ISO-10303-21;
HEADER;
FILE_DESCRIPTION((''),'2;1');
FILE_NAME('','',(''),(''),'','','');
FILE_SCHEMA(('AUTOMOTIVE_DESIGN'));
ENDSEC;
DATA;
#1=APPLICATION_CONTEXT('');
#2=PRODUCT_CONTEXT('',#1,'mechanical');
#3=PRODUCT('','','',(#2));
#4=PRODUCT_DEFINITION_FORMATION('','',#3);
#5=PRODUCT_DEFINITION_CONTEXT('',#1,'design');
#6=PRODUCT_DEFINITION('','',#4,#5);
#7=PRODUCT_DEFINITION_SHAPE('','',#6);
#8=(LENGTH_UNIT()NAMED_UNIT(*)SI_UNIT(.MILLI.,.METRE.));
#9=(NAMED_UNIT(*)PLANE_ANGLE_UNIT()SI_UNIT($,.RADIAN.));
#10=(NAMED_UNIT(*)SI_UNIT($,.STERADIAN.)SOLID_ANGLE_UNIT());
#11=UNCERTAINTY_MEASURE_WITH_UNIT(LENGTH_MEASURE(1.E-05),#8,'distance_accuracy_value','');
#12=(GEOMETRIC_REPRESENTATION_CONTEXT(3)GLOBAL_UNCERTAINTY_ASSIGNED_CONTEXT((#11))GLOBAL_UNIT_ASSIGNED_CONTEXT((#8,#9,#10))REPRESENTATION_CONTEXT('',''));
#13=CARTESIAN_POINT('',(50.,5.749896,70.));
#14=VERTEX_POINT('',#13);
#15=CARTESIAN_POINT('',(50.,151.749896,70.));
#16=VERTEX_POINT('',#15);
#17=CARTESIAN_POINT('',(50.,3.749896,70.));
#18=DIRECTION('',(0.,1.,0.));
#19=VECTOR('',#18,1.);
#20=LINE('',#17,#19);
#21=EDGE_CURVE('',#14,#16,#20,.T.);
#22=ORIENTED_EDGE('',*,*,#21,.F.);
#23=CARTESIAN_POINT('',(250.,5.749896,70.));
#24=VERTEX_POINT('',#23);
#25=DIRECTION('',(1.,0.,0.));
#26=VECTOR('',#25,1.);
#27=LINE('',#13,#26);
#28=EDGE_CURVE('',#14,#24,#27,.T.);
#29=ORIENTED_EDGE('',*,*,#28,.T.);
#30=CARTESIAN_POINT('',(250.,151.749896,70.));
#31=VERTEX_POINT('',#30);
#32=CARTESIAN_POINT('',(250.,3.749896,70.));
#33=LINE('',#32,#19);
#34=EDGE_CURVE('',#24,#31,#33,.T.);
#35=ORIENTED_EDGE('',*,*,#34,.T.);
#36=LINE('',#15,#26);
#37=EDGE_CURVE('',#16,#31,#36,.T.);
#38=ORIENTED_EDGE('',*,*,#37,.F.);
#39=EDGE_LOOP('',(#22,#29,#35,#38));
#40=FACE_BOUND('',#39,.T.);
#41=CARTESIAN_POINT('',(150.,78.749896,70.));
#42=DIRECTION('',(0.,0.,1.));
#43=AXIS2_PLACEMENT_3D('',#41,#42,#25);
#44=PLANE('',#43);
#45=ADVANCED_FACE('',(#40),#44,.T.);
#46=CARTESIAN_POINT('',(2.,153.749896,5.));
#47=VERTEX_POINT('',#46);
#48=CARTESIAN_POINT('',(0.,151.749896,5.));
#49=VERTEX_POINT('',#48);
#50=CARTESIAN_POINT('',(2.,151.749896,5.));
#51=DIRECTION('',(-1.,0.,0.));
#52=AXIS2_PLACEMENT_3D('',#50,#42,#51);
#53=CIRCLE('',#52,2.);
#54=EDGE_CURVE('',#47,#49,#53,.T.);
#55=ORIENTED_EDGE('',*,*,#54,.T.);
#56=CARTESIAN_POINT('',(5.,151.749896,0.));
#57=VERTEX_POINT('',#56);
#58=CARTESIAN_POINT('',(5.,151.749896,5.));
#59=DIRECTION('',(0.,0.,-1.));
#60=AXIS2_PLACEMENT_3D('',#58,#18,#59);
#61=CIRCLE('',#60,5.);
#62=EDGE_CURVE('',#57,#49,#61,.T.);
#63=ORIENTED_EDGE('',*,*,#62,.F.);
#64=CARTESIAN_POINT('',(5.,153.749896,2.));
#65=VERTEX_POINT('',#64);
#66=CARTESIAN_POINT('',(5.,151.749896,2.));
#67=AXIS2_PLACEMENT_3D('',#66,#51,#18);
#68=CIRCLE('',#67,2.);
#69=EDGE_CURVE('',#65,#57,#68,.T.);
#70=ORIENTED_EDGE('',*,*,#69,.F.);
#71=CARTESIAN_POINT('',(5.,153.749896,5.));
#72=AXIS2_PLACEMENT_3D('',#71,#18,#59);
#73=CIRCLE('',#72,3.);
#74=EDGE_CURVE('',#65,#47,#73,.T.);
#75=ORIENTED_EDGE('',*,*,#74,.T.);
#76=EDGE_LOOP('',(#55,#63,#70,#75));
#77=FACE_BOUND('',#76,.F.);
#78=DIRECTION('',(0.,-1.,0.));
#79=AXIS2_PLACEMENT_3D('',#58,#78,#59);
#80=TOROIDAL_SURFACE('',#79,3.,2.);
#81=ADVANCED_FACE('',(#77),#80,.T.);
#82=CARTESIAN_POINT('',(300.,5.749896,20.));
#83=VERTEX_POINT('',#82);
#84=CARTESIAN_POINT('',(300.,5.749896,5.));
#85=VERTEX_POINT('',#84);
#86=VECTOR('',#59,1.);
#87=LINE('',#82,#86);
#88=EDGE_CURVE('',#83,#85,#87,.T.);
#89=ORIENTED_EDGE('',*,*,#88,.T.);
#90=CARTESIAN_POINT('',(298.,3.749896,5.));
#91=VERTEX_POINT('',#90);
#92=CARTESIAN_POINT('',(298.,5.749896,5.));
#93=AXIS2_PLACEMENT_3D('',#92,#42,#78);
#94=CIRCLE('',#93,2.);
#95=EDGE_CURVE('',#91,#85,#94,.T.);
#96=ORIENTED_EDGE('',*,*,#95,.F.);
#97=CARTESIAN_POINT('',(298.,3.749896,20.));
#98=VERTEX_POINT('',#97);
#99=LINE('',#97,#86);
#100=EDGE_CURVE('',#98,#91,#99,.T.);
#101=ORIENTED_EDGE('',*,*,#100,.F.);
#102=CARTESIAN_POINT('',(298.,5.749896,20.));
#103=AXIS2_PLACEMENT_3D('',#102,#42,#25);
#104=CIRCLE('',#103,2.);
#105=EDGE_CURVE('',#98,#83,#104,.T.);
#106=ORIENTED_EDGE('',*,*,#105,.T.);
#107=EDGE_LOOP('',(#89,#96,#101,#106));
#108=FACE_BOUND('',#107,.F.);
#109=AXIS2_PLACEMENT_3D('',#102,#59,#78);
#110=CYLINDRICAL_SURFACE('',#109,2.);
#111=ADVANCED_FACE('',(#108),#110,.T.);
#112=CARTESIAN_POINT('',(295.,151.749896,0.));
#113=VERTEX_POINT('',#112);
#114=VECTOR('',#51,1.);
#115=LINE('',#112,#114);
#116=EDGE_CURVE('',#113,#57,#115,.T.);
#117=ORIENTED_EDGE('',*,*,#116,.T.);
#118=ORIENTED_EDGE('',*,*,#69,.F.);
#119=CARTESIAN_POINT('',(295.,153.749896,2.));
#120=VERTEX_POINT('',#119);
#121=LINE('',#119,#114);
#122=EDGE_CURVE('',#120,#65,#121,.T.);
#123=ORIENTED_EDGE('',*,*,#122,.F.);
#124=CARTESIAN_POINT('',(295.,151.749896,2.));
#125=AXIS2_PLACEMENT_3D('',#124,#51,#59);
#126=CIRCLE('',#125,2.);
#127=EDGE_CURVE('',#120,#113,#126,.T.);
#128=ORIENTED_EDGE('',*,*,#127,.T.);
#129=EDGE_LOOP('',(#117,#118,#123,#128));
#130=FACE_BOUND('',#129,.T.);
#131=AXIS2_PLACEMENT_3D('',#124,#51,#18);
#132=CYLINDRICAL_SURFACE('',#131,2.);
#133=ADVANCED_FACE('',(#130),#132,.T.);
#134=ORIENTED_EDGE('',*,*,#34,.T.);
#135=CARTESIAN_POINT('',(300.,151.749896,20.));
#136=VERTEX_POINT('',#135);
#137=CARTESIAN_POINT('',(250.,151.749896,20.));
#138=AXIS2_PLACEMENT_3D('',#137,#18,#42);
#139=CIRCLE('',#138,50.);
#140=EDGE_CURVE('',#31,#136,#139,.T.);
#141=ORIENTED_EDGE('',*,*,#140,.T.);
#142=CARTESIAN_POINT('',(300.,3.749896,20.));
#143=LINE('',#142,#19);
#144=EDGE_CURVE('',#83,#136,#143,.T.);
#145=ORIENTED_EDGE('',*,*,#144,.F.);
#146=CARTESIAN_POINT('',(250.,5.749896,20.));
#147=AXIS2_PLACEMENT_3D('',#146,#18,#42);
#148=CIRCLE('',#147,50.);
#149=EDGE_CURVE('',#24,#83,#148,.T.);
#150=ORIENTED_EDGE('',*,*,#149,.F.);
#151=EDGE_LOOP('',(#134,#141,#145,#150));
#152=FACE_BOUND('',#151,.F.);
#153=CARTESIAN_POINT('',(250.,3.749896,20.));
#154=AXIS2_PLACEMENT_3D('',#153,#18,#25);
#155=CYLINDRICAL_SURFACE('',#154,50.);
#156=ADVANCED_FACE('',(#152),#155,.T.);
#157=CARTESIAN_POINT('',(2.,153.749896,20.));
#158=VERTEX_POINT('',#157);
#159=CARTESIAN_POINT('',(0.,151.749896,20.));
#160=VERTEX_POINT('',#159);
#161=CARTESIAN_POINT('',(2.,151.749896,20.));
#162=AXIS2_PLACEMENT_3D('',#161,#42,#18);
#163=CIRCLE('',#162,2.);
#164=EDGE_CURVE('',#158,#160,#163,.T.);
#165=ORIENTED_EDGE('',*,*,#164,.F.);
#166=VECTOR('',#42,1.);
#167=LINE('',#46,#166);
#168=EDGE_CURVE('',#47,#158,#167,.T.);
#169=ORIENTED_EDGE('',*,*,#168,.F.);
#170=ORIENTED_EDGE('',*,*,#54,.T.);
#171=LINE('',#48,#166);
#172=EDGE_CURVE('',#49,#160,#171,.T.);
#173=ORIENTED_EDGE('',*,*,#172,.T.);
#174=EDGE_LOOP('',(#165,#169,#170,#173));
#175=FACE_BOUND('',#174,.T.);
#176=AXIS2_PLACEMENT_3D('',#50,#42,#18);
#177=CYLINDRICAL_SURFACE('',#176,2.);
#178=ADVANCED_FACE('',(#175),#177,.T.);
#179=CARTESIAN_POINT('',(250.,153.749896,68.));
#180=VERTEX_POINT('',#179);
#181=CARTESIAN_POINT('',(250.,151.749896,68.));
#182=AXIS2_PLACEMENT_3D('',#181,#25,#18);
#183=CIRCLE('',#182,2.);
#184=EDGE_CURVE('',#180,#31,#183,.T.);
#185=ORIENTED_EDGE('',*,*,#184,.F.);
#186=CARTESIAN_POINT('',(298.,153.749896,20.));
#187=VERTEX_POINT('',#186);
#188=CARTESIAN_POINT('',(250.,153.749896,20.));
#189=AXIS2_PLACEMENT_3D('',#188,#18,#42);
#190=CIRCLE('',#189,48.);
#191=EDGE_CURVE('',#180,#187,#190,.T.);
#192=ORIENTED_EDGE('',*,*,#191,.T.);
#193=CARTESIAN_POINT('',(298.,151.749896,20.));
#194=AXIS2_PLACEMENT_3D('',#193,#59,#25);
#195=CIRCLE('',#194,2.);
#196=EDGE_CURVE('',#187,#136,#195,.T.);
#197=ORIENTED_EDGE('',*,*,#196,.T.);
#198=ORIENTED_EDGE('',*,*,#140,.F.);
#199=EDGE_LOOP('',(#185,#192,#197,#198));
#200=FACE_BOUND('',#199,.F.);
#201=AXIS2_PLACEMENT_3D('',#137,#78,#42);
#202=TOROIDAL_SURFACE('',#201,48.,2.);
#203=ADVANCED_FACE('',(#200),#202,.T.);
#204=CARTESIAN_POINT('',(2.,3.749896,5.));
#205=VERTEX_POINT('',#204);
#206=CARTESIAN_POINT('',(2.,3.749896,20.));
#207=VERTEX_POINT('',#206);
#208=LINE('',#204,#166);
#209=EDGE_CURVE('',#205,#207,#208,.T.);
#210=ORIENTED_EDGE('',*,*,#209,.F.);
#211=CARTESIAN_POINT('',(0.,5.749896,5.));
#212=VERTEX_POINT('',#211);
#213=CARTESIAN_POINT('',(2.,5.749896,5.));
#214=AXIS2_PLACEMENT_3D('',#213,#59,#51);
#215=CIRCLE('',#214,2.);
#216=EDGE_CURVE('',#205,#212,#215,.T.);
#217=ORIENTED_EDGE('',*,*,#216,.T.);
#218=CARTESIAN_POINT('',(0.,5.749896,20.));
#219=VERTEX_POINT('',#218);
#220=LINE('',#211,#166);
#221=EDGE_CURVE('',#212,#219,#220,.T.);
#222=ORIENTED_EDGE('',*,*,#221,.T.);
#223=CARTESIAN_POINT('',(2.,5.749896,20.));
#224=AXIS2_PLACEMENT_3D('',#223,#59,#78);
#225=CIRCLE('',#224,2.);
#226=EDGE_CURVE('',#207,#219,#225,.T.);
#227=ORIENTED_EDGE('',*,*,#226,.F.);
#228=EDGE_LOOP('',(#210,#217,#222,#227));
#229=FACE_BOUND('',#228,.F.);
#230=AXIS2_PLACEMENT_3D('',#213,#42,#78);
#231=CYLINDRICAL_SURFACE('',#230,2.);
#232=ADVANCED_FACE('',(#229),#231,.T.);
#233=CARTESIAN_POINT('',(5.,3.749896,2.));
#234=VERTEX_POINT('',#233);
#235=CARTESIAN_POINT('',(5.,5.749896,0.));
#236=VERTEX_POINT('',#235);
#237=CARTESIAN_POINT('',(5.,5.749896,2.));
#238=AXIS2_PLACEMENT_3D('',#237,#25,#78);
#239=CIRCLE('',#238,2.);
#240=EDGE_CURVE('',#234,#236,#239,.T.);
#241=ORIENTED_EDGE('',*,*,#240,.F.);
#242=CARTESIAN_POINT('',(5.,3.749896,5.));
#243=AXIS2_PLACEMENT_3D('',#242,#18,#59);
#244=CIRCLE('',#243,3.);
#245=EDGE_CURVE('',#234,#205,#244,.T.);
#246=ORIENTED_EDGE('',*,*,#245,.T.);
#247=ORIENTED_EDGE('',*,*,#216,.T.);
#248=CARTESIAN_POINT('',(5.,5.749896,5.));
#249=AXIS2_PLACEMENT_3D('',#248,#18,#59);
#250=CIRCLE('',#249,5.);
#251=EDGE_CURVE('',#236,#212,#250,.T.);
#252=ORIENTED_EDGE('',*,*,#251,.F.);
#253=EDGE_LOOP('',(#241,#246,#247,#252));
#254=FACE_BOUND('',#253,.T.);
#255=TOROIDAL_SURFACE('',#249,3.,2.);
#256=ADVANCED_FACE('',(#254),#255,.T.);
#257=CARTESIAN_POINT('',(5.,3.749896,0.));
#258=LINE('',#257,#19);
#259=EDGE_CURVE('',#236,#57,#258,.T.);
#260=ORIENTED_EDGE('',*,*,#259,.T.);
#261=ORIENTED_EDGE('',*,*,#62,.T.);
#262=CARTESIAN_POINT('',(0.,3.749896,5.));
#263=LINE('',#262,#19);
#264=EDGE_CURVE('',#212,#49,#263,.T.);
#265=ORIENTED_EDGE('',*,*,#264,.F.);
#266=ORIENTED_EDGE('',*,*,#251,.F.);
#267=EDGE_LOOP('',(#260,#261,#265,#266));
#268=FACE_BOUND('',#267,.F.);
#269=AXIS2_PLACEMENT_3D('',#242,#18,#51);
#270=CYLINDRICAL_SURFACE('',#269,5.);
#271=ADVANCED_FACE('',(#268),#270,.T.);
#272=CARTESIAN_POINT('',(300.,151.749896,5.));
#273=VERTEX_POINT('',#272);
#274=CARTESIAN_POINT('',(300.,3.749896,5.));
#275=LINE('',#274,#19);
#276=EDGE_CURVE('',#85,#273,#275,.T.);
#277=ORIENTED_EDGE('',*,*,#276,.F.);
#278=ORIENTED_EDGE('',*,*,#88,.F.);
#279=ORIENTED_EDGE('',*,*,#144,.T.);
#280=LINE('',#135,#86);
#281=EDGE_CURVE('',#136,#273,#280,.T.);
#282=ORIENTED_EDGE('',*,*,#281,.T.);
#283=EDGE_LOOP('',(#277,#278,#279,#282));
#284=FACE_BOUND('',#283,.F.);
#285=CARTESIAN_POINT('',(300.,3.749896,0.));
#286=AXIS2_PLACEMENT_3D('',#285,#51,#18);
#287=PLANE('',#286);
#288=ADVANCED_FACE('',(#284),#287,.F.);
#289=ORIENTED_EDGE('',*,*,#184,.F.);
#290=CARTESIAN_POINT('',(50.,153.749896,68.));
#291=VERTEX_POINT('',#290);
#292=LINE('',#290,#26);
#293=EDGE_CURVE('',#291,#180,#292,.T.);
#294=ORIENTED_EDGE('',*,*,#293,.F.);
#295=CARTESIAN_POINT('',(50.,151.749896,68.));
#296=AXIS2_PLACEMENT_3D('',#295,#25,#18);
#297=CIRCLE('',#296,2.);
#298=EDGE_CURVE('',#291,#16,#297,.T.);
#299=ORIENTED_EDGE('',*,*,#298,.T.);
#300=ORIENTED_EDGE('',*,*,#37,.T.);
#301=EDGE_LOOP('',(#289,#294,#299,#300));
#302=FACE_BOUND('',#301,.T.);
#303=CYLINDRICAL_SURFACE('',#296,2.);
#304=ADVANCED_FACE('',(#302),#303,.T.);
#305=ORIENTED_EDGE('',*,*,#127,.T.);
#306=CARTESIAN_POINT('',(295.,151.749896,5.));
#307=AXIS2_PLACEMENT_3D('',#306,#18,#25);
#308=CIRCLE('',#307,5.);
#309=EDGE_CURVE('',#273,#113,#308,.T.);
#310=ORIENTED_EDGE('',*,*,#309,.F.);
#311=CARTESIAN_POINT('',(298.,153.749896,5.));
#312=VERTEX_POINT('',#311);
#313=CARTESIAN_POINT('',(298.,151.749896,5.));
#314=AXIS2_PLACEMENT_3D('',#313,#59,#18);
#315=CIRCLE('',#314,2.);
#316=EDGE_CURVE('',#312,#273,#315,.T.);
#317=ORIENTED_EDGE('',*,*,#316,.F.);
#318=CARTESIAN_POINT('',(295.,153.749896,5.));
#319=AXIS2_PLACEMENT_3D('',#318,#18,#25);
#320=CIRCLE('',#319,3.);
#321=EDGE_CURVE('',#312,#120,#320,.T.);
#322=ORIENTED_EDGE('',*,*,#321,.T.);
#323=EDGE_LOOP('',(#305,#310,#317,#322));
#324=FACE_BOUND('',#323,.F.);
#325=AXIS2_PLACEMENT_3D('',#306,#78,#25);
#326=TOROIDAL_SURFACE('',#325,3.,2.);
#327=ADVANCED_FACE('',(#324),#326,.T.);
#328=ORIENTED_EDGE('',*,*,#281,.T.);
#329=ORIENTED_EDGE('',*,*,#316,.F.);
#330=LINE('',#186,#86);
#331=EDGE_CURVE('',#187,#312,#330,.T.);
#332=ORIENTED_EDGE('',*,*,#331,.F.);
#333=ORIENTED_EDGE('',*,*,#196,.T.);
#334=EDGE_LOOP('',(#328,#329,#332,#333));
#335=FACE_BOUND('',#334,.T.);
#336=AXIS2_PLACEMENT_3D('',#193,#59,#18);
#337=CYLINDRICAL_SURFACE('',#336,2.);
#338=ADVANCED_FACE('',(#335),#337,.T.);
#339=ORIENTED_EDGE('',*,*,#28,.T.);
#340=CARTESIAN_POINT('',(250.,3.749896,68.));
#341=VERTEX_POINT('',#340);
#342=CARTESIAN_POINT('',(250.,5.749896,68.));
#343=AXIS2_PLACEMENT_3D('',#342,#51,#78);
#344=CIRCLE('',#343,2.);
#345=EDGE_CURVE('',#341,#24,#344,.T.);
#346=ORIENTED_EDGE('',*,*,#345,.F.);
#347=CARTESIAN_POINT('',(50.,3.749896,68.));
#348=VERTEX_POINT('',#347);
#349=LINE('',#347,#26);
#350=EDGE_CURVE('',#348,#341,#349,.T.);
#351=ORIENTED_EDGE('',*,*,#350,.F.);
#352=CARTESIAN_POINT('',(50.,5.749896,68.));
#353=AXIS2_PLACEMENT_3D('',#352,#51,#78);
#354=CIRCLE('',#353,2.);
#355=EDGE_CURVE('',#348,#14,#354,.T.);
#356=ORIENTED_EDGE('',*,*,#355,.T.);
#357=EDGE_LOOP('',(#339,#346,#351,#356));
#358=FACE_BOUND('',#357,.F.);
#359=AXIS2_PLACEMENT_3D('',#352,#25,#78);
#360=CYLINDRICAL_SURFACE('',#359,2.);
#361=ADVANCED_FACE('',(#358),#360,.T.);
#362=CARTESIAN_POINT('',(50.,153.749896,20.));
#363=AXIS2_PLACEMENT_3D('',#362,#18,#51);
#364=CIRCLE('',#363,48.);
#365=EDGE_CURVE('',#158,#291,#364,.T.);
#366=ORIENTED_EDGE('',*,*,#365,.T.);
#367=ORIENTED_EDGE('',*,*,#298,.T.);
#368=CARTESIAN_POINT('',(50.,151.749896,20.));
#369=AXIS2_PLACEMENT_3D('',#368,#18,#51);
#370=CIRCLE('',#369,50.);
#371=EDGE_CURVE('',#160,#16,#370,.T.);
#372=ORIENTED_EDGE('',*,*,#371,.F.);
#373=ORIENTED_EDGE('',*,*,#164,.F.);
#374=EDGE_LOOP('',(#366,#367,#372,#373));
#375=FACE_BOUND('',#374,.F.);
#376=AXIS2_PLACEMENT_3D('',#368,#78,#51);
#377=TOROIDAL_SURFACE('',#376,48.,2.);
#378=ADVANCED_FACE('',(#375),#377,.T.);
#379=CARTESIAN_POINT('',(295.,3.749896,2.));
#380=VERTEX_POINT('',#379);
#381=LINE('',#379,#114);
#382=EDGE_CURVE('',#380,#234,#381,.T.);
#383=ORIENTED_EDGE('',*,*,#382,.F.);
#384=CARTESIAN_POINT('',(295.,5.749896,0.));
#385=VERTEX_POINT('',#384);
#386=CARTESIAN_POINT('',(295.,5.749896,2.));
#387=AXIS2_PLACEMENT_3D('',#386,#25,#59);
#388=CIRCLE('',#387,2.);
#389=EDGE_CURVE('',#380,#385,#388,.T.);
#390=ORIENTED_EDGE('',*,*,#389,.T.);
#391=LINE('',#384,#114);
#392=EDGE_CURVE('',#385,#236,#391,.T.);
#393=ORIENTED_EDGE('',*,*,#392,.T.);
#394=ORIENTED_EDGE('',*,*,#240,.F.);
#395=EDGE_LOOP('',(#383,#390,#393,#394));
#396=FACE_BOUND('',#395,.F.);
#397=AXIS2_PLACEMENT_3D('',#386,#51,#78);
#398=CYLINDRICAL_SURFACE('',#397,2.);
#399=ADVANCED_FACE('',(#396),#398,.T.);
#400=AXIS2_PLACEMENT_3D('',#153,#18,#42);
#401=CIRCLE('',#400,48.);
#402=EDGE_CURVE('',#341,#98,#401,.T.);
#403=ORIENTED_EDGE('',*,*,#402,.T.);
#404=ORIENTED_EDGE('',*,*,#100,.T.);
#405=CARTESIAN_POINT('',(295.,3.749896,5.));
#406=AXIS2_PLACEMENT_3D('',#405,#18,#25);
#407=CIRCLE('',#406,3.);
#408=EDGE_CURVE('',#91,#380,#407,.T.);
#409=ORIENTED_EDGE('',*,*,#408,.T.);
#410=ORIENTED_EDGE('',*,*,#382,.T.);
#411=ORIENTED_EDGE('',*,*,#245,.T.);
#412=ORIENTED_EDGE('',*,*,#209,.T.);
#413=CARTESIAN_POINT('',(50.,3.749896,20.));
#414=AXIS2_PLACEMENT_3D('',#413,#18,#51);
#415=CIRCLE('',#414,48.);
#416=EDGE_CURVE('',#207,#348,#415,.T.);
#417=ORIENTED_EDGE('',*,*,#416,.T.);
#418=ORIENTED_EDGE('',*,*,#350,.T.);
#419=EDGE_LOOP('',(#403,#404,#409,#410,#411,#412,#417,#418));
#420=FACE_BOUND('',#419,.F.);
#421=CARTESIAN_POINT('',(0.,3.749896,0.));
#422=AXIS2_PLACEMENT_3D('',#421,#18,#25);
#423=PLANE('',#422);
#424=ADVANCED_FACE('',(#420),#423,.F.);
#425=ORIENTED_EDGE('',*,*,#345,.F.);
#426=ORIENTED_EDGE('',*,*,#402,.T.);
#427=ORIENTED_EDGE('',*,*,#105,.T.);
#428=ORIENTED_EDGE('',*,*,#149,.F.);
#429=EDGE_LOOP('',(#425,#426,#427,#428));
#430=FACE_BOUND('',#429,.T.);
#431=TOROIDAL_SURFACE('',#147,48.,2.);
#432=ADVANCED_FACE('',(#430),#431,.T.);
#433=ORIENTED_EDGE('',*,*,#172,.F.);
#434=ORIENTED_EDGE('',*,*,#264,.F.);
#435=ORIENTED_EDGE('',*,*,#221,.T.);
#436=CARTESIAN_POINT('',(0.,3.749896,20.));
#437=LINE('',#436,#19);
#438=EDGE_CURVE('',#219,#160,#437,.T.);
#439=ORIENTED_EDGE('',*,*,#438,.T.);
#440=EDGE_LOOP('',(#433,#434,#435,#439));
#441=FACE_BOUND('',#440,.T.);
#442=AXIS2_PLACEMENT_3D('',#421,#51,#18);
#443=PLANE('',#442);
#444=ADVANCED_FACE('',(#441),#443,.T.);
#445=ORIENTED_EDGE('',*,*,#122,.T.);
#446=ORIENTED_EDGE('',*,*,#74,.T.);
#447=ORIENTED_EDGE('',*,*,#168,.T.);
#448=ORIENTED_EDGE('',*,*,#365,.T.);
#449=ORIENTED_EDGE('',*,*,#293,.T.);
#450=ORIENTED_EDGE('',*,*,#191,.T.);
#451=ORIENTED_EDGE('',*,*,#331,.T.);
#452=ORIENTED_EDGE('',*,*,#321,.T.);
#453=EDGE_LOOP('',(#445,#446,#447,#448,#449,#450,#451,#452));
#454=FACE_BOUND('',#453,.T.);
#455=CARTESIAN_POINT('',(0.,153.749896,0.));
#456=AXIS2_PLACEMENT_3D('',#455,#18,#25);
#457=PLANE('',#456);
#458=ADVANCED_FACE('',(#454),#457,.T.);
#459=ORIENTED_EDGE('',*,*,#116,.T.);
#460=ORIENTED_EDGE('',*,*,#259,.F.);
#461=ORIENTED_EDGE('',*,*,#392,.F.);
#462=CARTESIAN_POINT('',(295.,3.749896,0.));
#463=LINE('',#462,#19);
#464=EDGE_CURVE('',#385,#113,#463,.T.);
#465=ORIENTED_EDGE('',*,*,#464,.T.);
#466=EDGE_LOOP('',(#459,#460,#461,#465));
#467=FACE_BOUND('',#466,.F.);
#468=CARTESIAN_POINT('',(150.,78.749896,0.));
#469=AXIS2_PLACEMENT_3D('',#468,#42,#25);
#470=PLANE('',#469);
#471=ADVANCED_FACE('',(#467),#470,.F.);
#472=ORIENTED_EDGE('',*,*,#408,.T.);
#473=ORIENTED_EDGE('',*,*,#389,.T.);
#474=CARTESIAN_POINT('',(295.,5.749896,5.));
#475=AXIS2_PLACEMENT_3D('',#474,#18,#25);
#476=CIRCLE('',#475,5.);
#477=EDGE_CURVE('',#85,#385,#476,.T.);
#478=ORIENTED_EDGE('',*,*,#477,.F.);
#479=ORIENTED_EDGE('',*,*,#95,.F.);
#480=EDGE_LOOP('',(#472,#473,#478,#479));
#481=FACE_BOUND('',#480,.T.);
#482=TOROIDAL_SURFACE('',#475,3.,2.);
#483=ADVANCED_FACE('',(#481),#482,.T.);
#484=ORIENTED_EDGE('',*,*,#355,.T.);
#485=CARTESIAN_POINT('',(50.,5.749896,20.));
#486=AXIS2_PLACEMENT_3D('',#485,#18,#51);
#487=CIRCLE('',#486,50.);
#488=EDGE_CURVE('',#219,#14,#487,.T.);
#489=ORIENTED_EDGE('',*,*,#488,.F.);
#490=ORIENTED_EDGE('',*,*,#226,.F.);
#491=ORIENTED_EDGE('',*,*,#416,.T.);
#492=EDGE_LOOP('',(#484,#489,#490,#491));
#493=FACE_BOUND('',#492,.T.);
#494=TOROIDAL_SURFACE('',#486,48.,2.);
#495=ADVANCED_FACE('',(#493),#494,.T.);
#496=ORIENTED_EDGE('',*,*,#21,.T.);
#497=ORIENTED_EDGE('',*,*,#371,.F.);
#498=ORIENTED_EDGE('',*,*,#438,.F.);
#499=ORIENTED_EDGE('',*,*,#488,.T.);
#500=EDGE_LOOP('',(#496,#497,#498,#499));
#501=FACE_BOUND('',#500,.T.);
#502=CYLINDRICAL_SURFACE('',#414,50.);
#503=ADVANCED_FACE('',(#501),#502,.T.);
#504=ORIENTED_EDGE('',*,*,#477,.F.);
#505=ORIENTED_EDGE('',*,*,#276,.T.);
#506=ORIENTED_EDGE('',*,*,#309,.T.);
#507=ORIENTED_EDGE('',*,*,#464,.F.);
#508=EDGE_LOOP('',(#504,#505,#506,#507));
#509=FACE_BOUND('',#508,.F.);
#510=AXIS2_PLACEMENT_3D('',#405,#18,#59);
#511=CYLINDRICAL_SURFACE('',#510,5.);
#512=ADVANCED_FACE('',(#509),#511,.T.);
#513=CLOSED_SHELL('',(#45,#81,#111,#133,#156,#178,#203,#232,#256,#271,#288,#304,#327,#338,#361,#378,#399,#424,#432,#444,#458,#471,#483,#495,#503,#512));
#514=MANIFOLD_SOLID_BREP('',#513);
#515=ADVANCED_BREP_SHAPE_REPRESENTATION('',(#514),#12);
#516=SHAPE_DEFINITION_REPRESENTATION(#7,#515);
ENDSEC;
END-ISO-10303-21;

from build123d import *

# Parameters (mm, degrees)
F0_W     = 300
F0_H     = 150
F1_DEPTH = 70
F2_R     = 50
F3_R     = 5
F4_R     = 2


with BuildPart() as f1:
    # F0 (on Top) → F1 (new body)
    with BuildSketch(Plane.XY):
        with Locations((150, 78.7498958572)):
            Rectangle(F0_W, F0_H)
    extrude(amount=F1_DEPTH)

    # F2
    f2_edges = [f1.edges().sort_by_distance(p)[0] for p in [
        (0, 78.749896, 70),
        (300, 78.749896, 70),
    ]]
    fillet(f2_edges, radius=F2_R)

    # F3
    f3_edges = [f1.edges().sort_by_distance(p)[0] for p in [
        (0, 78.749896, 0),
        (300, 78.749896, 0),
    ]]
    fillet(f3_edges, radius=F3_R)

    # F4
    f4_edges = [f1.edges().sort_by_distance(p)[0] for p in [
        (150, 3.749896, 70),
        (150, 153.749896, 70),
        (150, 3.749896, 0),
        (150, 153.749896, 0),
        (300, 3.749896, 12.5),
        (300, 153.749896, 12.5),
        (0, 3.749896, 12.5),
        (1.464466, 3.749896, 1.464466),
        (14.644661, 3.749896, 55.355339),
        (298.535534, 3.749896, 1.464466),
        (285.355339, 3.749896, 55.355339),
        (298.535534, 153.749896, 1.464466),
        (285.355339, 153.749896, 55.355339),
        (1.464466, 153.749896, 1.464466),
        (14.644661, 153.749896, 55.355339),
        (0, 153.749896, 12.5),
    ]]
    fillet(f4_edges, radius=F4_R)


solid = f1.part
